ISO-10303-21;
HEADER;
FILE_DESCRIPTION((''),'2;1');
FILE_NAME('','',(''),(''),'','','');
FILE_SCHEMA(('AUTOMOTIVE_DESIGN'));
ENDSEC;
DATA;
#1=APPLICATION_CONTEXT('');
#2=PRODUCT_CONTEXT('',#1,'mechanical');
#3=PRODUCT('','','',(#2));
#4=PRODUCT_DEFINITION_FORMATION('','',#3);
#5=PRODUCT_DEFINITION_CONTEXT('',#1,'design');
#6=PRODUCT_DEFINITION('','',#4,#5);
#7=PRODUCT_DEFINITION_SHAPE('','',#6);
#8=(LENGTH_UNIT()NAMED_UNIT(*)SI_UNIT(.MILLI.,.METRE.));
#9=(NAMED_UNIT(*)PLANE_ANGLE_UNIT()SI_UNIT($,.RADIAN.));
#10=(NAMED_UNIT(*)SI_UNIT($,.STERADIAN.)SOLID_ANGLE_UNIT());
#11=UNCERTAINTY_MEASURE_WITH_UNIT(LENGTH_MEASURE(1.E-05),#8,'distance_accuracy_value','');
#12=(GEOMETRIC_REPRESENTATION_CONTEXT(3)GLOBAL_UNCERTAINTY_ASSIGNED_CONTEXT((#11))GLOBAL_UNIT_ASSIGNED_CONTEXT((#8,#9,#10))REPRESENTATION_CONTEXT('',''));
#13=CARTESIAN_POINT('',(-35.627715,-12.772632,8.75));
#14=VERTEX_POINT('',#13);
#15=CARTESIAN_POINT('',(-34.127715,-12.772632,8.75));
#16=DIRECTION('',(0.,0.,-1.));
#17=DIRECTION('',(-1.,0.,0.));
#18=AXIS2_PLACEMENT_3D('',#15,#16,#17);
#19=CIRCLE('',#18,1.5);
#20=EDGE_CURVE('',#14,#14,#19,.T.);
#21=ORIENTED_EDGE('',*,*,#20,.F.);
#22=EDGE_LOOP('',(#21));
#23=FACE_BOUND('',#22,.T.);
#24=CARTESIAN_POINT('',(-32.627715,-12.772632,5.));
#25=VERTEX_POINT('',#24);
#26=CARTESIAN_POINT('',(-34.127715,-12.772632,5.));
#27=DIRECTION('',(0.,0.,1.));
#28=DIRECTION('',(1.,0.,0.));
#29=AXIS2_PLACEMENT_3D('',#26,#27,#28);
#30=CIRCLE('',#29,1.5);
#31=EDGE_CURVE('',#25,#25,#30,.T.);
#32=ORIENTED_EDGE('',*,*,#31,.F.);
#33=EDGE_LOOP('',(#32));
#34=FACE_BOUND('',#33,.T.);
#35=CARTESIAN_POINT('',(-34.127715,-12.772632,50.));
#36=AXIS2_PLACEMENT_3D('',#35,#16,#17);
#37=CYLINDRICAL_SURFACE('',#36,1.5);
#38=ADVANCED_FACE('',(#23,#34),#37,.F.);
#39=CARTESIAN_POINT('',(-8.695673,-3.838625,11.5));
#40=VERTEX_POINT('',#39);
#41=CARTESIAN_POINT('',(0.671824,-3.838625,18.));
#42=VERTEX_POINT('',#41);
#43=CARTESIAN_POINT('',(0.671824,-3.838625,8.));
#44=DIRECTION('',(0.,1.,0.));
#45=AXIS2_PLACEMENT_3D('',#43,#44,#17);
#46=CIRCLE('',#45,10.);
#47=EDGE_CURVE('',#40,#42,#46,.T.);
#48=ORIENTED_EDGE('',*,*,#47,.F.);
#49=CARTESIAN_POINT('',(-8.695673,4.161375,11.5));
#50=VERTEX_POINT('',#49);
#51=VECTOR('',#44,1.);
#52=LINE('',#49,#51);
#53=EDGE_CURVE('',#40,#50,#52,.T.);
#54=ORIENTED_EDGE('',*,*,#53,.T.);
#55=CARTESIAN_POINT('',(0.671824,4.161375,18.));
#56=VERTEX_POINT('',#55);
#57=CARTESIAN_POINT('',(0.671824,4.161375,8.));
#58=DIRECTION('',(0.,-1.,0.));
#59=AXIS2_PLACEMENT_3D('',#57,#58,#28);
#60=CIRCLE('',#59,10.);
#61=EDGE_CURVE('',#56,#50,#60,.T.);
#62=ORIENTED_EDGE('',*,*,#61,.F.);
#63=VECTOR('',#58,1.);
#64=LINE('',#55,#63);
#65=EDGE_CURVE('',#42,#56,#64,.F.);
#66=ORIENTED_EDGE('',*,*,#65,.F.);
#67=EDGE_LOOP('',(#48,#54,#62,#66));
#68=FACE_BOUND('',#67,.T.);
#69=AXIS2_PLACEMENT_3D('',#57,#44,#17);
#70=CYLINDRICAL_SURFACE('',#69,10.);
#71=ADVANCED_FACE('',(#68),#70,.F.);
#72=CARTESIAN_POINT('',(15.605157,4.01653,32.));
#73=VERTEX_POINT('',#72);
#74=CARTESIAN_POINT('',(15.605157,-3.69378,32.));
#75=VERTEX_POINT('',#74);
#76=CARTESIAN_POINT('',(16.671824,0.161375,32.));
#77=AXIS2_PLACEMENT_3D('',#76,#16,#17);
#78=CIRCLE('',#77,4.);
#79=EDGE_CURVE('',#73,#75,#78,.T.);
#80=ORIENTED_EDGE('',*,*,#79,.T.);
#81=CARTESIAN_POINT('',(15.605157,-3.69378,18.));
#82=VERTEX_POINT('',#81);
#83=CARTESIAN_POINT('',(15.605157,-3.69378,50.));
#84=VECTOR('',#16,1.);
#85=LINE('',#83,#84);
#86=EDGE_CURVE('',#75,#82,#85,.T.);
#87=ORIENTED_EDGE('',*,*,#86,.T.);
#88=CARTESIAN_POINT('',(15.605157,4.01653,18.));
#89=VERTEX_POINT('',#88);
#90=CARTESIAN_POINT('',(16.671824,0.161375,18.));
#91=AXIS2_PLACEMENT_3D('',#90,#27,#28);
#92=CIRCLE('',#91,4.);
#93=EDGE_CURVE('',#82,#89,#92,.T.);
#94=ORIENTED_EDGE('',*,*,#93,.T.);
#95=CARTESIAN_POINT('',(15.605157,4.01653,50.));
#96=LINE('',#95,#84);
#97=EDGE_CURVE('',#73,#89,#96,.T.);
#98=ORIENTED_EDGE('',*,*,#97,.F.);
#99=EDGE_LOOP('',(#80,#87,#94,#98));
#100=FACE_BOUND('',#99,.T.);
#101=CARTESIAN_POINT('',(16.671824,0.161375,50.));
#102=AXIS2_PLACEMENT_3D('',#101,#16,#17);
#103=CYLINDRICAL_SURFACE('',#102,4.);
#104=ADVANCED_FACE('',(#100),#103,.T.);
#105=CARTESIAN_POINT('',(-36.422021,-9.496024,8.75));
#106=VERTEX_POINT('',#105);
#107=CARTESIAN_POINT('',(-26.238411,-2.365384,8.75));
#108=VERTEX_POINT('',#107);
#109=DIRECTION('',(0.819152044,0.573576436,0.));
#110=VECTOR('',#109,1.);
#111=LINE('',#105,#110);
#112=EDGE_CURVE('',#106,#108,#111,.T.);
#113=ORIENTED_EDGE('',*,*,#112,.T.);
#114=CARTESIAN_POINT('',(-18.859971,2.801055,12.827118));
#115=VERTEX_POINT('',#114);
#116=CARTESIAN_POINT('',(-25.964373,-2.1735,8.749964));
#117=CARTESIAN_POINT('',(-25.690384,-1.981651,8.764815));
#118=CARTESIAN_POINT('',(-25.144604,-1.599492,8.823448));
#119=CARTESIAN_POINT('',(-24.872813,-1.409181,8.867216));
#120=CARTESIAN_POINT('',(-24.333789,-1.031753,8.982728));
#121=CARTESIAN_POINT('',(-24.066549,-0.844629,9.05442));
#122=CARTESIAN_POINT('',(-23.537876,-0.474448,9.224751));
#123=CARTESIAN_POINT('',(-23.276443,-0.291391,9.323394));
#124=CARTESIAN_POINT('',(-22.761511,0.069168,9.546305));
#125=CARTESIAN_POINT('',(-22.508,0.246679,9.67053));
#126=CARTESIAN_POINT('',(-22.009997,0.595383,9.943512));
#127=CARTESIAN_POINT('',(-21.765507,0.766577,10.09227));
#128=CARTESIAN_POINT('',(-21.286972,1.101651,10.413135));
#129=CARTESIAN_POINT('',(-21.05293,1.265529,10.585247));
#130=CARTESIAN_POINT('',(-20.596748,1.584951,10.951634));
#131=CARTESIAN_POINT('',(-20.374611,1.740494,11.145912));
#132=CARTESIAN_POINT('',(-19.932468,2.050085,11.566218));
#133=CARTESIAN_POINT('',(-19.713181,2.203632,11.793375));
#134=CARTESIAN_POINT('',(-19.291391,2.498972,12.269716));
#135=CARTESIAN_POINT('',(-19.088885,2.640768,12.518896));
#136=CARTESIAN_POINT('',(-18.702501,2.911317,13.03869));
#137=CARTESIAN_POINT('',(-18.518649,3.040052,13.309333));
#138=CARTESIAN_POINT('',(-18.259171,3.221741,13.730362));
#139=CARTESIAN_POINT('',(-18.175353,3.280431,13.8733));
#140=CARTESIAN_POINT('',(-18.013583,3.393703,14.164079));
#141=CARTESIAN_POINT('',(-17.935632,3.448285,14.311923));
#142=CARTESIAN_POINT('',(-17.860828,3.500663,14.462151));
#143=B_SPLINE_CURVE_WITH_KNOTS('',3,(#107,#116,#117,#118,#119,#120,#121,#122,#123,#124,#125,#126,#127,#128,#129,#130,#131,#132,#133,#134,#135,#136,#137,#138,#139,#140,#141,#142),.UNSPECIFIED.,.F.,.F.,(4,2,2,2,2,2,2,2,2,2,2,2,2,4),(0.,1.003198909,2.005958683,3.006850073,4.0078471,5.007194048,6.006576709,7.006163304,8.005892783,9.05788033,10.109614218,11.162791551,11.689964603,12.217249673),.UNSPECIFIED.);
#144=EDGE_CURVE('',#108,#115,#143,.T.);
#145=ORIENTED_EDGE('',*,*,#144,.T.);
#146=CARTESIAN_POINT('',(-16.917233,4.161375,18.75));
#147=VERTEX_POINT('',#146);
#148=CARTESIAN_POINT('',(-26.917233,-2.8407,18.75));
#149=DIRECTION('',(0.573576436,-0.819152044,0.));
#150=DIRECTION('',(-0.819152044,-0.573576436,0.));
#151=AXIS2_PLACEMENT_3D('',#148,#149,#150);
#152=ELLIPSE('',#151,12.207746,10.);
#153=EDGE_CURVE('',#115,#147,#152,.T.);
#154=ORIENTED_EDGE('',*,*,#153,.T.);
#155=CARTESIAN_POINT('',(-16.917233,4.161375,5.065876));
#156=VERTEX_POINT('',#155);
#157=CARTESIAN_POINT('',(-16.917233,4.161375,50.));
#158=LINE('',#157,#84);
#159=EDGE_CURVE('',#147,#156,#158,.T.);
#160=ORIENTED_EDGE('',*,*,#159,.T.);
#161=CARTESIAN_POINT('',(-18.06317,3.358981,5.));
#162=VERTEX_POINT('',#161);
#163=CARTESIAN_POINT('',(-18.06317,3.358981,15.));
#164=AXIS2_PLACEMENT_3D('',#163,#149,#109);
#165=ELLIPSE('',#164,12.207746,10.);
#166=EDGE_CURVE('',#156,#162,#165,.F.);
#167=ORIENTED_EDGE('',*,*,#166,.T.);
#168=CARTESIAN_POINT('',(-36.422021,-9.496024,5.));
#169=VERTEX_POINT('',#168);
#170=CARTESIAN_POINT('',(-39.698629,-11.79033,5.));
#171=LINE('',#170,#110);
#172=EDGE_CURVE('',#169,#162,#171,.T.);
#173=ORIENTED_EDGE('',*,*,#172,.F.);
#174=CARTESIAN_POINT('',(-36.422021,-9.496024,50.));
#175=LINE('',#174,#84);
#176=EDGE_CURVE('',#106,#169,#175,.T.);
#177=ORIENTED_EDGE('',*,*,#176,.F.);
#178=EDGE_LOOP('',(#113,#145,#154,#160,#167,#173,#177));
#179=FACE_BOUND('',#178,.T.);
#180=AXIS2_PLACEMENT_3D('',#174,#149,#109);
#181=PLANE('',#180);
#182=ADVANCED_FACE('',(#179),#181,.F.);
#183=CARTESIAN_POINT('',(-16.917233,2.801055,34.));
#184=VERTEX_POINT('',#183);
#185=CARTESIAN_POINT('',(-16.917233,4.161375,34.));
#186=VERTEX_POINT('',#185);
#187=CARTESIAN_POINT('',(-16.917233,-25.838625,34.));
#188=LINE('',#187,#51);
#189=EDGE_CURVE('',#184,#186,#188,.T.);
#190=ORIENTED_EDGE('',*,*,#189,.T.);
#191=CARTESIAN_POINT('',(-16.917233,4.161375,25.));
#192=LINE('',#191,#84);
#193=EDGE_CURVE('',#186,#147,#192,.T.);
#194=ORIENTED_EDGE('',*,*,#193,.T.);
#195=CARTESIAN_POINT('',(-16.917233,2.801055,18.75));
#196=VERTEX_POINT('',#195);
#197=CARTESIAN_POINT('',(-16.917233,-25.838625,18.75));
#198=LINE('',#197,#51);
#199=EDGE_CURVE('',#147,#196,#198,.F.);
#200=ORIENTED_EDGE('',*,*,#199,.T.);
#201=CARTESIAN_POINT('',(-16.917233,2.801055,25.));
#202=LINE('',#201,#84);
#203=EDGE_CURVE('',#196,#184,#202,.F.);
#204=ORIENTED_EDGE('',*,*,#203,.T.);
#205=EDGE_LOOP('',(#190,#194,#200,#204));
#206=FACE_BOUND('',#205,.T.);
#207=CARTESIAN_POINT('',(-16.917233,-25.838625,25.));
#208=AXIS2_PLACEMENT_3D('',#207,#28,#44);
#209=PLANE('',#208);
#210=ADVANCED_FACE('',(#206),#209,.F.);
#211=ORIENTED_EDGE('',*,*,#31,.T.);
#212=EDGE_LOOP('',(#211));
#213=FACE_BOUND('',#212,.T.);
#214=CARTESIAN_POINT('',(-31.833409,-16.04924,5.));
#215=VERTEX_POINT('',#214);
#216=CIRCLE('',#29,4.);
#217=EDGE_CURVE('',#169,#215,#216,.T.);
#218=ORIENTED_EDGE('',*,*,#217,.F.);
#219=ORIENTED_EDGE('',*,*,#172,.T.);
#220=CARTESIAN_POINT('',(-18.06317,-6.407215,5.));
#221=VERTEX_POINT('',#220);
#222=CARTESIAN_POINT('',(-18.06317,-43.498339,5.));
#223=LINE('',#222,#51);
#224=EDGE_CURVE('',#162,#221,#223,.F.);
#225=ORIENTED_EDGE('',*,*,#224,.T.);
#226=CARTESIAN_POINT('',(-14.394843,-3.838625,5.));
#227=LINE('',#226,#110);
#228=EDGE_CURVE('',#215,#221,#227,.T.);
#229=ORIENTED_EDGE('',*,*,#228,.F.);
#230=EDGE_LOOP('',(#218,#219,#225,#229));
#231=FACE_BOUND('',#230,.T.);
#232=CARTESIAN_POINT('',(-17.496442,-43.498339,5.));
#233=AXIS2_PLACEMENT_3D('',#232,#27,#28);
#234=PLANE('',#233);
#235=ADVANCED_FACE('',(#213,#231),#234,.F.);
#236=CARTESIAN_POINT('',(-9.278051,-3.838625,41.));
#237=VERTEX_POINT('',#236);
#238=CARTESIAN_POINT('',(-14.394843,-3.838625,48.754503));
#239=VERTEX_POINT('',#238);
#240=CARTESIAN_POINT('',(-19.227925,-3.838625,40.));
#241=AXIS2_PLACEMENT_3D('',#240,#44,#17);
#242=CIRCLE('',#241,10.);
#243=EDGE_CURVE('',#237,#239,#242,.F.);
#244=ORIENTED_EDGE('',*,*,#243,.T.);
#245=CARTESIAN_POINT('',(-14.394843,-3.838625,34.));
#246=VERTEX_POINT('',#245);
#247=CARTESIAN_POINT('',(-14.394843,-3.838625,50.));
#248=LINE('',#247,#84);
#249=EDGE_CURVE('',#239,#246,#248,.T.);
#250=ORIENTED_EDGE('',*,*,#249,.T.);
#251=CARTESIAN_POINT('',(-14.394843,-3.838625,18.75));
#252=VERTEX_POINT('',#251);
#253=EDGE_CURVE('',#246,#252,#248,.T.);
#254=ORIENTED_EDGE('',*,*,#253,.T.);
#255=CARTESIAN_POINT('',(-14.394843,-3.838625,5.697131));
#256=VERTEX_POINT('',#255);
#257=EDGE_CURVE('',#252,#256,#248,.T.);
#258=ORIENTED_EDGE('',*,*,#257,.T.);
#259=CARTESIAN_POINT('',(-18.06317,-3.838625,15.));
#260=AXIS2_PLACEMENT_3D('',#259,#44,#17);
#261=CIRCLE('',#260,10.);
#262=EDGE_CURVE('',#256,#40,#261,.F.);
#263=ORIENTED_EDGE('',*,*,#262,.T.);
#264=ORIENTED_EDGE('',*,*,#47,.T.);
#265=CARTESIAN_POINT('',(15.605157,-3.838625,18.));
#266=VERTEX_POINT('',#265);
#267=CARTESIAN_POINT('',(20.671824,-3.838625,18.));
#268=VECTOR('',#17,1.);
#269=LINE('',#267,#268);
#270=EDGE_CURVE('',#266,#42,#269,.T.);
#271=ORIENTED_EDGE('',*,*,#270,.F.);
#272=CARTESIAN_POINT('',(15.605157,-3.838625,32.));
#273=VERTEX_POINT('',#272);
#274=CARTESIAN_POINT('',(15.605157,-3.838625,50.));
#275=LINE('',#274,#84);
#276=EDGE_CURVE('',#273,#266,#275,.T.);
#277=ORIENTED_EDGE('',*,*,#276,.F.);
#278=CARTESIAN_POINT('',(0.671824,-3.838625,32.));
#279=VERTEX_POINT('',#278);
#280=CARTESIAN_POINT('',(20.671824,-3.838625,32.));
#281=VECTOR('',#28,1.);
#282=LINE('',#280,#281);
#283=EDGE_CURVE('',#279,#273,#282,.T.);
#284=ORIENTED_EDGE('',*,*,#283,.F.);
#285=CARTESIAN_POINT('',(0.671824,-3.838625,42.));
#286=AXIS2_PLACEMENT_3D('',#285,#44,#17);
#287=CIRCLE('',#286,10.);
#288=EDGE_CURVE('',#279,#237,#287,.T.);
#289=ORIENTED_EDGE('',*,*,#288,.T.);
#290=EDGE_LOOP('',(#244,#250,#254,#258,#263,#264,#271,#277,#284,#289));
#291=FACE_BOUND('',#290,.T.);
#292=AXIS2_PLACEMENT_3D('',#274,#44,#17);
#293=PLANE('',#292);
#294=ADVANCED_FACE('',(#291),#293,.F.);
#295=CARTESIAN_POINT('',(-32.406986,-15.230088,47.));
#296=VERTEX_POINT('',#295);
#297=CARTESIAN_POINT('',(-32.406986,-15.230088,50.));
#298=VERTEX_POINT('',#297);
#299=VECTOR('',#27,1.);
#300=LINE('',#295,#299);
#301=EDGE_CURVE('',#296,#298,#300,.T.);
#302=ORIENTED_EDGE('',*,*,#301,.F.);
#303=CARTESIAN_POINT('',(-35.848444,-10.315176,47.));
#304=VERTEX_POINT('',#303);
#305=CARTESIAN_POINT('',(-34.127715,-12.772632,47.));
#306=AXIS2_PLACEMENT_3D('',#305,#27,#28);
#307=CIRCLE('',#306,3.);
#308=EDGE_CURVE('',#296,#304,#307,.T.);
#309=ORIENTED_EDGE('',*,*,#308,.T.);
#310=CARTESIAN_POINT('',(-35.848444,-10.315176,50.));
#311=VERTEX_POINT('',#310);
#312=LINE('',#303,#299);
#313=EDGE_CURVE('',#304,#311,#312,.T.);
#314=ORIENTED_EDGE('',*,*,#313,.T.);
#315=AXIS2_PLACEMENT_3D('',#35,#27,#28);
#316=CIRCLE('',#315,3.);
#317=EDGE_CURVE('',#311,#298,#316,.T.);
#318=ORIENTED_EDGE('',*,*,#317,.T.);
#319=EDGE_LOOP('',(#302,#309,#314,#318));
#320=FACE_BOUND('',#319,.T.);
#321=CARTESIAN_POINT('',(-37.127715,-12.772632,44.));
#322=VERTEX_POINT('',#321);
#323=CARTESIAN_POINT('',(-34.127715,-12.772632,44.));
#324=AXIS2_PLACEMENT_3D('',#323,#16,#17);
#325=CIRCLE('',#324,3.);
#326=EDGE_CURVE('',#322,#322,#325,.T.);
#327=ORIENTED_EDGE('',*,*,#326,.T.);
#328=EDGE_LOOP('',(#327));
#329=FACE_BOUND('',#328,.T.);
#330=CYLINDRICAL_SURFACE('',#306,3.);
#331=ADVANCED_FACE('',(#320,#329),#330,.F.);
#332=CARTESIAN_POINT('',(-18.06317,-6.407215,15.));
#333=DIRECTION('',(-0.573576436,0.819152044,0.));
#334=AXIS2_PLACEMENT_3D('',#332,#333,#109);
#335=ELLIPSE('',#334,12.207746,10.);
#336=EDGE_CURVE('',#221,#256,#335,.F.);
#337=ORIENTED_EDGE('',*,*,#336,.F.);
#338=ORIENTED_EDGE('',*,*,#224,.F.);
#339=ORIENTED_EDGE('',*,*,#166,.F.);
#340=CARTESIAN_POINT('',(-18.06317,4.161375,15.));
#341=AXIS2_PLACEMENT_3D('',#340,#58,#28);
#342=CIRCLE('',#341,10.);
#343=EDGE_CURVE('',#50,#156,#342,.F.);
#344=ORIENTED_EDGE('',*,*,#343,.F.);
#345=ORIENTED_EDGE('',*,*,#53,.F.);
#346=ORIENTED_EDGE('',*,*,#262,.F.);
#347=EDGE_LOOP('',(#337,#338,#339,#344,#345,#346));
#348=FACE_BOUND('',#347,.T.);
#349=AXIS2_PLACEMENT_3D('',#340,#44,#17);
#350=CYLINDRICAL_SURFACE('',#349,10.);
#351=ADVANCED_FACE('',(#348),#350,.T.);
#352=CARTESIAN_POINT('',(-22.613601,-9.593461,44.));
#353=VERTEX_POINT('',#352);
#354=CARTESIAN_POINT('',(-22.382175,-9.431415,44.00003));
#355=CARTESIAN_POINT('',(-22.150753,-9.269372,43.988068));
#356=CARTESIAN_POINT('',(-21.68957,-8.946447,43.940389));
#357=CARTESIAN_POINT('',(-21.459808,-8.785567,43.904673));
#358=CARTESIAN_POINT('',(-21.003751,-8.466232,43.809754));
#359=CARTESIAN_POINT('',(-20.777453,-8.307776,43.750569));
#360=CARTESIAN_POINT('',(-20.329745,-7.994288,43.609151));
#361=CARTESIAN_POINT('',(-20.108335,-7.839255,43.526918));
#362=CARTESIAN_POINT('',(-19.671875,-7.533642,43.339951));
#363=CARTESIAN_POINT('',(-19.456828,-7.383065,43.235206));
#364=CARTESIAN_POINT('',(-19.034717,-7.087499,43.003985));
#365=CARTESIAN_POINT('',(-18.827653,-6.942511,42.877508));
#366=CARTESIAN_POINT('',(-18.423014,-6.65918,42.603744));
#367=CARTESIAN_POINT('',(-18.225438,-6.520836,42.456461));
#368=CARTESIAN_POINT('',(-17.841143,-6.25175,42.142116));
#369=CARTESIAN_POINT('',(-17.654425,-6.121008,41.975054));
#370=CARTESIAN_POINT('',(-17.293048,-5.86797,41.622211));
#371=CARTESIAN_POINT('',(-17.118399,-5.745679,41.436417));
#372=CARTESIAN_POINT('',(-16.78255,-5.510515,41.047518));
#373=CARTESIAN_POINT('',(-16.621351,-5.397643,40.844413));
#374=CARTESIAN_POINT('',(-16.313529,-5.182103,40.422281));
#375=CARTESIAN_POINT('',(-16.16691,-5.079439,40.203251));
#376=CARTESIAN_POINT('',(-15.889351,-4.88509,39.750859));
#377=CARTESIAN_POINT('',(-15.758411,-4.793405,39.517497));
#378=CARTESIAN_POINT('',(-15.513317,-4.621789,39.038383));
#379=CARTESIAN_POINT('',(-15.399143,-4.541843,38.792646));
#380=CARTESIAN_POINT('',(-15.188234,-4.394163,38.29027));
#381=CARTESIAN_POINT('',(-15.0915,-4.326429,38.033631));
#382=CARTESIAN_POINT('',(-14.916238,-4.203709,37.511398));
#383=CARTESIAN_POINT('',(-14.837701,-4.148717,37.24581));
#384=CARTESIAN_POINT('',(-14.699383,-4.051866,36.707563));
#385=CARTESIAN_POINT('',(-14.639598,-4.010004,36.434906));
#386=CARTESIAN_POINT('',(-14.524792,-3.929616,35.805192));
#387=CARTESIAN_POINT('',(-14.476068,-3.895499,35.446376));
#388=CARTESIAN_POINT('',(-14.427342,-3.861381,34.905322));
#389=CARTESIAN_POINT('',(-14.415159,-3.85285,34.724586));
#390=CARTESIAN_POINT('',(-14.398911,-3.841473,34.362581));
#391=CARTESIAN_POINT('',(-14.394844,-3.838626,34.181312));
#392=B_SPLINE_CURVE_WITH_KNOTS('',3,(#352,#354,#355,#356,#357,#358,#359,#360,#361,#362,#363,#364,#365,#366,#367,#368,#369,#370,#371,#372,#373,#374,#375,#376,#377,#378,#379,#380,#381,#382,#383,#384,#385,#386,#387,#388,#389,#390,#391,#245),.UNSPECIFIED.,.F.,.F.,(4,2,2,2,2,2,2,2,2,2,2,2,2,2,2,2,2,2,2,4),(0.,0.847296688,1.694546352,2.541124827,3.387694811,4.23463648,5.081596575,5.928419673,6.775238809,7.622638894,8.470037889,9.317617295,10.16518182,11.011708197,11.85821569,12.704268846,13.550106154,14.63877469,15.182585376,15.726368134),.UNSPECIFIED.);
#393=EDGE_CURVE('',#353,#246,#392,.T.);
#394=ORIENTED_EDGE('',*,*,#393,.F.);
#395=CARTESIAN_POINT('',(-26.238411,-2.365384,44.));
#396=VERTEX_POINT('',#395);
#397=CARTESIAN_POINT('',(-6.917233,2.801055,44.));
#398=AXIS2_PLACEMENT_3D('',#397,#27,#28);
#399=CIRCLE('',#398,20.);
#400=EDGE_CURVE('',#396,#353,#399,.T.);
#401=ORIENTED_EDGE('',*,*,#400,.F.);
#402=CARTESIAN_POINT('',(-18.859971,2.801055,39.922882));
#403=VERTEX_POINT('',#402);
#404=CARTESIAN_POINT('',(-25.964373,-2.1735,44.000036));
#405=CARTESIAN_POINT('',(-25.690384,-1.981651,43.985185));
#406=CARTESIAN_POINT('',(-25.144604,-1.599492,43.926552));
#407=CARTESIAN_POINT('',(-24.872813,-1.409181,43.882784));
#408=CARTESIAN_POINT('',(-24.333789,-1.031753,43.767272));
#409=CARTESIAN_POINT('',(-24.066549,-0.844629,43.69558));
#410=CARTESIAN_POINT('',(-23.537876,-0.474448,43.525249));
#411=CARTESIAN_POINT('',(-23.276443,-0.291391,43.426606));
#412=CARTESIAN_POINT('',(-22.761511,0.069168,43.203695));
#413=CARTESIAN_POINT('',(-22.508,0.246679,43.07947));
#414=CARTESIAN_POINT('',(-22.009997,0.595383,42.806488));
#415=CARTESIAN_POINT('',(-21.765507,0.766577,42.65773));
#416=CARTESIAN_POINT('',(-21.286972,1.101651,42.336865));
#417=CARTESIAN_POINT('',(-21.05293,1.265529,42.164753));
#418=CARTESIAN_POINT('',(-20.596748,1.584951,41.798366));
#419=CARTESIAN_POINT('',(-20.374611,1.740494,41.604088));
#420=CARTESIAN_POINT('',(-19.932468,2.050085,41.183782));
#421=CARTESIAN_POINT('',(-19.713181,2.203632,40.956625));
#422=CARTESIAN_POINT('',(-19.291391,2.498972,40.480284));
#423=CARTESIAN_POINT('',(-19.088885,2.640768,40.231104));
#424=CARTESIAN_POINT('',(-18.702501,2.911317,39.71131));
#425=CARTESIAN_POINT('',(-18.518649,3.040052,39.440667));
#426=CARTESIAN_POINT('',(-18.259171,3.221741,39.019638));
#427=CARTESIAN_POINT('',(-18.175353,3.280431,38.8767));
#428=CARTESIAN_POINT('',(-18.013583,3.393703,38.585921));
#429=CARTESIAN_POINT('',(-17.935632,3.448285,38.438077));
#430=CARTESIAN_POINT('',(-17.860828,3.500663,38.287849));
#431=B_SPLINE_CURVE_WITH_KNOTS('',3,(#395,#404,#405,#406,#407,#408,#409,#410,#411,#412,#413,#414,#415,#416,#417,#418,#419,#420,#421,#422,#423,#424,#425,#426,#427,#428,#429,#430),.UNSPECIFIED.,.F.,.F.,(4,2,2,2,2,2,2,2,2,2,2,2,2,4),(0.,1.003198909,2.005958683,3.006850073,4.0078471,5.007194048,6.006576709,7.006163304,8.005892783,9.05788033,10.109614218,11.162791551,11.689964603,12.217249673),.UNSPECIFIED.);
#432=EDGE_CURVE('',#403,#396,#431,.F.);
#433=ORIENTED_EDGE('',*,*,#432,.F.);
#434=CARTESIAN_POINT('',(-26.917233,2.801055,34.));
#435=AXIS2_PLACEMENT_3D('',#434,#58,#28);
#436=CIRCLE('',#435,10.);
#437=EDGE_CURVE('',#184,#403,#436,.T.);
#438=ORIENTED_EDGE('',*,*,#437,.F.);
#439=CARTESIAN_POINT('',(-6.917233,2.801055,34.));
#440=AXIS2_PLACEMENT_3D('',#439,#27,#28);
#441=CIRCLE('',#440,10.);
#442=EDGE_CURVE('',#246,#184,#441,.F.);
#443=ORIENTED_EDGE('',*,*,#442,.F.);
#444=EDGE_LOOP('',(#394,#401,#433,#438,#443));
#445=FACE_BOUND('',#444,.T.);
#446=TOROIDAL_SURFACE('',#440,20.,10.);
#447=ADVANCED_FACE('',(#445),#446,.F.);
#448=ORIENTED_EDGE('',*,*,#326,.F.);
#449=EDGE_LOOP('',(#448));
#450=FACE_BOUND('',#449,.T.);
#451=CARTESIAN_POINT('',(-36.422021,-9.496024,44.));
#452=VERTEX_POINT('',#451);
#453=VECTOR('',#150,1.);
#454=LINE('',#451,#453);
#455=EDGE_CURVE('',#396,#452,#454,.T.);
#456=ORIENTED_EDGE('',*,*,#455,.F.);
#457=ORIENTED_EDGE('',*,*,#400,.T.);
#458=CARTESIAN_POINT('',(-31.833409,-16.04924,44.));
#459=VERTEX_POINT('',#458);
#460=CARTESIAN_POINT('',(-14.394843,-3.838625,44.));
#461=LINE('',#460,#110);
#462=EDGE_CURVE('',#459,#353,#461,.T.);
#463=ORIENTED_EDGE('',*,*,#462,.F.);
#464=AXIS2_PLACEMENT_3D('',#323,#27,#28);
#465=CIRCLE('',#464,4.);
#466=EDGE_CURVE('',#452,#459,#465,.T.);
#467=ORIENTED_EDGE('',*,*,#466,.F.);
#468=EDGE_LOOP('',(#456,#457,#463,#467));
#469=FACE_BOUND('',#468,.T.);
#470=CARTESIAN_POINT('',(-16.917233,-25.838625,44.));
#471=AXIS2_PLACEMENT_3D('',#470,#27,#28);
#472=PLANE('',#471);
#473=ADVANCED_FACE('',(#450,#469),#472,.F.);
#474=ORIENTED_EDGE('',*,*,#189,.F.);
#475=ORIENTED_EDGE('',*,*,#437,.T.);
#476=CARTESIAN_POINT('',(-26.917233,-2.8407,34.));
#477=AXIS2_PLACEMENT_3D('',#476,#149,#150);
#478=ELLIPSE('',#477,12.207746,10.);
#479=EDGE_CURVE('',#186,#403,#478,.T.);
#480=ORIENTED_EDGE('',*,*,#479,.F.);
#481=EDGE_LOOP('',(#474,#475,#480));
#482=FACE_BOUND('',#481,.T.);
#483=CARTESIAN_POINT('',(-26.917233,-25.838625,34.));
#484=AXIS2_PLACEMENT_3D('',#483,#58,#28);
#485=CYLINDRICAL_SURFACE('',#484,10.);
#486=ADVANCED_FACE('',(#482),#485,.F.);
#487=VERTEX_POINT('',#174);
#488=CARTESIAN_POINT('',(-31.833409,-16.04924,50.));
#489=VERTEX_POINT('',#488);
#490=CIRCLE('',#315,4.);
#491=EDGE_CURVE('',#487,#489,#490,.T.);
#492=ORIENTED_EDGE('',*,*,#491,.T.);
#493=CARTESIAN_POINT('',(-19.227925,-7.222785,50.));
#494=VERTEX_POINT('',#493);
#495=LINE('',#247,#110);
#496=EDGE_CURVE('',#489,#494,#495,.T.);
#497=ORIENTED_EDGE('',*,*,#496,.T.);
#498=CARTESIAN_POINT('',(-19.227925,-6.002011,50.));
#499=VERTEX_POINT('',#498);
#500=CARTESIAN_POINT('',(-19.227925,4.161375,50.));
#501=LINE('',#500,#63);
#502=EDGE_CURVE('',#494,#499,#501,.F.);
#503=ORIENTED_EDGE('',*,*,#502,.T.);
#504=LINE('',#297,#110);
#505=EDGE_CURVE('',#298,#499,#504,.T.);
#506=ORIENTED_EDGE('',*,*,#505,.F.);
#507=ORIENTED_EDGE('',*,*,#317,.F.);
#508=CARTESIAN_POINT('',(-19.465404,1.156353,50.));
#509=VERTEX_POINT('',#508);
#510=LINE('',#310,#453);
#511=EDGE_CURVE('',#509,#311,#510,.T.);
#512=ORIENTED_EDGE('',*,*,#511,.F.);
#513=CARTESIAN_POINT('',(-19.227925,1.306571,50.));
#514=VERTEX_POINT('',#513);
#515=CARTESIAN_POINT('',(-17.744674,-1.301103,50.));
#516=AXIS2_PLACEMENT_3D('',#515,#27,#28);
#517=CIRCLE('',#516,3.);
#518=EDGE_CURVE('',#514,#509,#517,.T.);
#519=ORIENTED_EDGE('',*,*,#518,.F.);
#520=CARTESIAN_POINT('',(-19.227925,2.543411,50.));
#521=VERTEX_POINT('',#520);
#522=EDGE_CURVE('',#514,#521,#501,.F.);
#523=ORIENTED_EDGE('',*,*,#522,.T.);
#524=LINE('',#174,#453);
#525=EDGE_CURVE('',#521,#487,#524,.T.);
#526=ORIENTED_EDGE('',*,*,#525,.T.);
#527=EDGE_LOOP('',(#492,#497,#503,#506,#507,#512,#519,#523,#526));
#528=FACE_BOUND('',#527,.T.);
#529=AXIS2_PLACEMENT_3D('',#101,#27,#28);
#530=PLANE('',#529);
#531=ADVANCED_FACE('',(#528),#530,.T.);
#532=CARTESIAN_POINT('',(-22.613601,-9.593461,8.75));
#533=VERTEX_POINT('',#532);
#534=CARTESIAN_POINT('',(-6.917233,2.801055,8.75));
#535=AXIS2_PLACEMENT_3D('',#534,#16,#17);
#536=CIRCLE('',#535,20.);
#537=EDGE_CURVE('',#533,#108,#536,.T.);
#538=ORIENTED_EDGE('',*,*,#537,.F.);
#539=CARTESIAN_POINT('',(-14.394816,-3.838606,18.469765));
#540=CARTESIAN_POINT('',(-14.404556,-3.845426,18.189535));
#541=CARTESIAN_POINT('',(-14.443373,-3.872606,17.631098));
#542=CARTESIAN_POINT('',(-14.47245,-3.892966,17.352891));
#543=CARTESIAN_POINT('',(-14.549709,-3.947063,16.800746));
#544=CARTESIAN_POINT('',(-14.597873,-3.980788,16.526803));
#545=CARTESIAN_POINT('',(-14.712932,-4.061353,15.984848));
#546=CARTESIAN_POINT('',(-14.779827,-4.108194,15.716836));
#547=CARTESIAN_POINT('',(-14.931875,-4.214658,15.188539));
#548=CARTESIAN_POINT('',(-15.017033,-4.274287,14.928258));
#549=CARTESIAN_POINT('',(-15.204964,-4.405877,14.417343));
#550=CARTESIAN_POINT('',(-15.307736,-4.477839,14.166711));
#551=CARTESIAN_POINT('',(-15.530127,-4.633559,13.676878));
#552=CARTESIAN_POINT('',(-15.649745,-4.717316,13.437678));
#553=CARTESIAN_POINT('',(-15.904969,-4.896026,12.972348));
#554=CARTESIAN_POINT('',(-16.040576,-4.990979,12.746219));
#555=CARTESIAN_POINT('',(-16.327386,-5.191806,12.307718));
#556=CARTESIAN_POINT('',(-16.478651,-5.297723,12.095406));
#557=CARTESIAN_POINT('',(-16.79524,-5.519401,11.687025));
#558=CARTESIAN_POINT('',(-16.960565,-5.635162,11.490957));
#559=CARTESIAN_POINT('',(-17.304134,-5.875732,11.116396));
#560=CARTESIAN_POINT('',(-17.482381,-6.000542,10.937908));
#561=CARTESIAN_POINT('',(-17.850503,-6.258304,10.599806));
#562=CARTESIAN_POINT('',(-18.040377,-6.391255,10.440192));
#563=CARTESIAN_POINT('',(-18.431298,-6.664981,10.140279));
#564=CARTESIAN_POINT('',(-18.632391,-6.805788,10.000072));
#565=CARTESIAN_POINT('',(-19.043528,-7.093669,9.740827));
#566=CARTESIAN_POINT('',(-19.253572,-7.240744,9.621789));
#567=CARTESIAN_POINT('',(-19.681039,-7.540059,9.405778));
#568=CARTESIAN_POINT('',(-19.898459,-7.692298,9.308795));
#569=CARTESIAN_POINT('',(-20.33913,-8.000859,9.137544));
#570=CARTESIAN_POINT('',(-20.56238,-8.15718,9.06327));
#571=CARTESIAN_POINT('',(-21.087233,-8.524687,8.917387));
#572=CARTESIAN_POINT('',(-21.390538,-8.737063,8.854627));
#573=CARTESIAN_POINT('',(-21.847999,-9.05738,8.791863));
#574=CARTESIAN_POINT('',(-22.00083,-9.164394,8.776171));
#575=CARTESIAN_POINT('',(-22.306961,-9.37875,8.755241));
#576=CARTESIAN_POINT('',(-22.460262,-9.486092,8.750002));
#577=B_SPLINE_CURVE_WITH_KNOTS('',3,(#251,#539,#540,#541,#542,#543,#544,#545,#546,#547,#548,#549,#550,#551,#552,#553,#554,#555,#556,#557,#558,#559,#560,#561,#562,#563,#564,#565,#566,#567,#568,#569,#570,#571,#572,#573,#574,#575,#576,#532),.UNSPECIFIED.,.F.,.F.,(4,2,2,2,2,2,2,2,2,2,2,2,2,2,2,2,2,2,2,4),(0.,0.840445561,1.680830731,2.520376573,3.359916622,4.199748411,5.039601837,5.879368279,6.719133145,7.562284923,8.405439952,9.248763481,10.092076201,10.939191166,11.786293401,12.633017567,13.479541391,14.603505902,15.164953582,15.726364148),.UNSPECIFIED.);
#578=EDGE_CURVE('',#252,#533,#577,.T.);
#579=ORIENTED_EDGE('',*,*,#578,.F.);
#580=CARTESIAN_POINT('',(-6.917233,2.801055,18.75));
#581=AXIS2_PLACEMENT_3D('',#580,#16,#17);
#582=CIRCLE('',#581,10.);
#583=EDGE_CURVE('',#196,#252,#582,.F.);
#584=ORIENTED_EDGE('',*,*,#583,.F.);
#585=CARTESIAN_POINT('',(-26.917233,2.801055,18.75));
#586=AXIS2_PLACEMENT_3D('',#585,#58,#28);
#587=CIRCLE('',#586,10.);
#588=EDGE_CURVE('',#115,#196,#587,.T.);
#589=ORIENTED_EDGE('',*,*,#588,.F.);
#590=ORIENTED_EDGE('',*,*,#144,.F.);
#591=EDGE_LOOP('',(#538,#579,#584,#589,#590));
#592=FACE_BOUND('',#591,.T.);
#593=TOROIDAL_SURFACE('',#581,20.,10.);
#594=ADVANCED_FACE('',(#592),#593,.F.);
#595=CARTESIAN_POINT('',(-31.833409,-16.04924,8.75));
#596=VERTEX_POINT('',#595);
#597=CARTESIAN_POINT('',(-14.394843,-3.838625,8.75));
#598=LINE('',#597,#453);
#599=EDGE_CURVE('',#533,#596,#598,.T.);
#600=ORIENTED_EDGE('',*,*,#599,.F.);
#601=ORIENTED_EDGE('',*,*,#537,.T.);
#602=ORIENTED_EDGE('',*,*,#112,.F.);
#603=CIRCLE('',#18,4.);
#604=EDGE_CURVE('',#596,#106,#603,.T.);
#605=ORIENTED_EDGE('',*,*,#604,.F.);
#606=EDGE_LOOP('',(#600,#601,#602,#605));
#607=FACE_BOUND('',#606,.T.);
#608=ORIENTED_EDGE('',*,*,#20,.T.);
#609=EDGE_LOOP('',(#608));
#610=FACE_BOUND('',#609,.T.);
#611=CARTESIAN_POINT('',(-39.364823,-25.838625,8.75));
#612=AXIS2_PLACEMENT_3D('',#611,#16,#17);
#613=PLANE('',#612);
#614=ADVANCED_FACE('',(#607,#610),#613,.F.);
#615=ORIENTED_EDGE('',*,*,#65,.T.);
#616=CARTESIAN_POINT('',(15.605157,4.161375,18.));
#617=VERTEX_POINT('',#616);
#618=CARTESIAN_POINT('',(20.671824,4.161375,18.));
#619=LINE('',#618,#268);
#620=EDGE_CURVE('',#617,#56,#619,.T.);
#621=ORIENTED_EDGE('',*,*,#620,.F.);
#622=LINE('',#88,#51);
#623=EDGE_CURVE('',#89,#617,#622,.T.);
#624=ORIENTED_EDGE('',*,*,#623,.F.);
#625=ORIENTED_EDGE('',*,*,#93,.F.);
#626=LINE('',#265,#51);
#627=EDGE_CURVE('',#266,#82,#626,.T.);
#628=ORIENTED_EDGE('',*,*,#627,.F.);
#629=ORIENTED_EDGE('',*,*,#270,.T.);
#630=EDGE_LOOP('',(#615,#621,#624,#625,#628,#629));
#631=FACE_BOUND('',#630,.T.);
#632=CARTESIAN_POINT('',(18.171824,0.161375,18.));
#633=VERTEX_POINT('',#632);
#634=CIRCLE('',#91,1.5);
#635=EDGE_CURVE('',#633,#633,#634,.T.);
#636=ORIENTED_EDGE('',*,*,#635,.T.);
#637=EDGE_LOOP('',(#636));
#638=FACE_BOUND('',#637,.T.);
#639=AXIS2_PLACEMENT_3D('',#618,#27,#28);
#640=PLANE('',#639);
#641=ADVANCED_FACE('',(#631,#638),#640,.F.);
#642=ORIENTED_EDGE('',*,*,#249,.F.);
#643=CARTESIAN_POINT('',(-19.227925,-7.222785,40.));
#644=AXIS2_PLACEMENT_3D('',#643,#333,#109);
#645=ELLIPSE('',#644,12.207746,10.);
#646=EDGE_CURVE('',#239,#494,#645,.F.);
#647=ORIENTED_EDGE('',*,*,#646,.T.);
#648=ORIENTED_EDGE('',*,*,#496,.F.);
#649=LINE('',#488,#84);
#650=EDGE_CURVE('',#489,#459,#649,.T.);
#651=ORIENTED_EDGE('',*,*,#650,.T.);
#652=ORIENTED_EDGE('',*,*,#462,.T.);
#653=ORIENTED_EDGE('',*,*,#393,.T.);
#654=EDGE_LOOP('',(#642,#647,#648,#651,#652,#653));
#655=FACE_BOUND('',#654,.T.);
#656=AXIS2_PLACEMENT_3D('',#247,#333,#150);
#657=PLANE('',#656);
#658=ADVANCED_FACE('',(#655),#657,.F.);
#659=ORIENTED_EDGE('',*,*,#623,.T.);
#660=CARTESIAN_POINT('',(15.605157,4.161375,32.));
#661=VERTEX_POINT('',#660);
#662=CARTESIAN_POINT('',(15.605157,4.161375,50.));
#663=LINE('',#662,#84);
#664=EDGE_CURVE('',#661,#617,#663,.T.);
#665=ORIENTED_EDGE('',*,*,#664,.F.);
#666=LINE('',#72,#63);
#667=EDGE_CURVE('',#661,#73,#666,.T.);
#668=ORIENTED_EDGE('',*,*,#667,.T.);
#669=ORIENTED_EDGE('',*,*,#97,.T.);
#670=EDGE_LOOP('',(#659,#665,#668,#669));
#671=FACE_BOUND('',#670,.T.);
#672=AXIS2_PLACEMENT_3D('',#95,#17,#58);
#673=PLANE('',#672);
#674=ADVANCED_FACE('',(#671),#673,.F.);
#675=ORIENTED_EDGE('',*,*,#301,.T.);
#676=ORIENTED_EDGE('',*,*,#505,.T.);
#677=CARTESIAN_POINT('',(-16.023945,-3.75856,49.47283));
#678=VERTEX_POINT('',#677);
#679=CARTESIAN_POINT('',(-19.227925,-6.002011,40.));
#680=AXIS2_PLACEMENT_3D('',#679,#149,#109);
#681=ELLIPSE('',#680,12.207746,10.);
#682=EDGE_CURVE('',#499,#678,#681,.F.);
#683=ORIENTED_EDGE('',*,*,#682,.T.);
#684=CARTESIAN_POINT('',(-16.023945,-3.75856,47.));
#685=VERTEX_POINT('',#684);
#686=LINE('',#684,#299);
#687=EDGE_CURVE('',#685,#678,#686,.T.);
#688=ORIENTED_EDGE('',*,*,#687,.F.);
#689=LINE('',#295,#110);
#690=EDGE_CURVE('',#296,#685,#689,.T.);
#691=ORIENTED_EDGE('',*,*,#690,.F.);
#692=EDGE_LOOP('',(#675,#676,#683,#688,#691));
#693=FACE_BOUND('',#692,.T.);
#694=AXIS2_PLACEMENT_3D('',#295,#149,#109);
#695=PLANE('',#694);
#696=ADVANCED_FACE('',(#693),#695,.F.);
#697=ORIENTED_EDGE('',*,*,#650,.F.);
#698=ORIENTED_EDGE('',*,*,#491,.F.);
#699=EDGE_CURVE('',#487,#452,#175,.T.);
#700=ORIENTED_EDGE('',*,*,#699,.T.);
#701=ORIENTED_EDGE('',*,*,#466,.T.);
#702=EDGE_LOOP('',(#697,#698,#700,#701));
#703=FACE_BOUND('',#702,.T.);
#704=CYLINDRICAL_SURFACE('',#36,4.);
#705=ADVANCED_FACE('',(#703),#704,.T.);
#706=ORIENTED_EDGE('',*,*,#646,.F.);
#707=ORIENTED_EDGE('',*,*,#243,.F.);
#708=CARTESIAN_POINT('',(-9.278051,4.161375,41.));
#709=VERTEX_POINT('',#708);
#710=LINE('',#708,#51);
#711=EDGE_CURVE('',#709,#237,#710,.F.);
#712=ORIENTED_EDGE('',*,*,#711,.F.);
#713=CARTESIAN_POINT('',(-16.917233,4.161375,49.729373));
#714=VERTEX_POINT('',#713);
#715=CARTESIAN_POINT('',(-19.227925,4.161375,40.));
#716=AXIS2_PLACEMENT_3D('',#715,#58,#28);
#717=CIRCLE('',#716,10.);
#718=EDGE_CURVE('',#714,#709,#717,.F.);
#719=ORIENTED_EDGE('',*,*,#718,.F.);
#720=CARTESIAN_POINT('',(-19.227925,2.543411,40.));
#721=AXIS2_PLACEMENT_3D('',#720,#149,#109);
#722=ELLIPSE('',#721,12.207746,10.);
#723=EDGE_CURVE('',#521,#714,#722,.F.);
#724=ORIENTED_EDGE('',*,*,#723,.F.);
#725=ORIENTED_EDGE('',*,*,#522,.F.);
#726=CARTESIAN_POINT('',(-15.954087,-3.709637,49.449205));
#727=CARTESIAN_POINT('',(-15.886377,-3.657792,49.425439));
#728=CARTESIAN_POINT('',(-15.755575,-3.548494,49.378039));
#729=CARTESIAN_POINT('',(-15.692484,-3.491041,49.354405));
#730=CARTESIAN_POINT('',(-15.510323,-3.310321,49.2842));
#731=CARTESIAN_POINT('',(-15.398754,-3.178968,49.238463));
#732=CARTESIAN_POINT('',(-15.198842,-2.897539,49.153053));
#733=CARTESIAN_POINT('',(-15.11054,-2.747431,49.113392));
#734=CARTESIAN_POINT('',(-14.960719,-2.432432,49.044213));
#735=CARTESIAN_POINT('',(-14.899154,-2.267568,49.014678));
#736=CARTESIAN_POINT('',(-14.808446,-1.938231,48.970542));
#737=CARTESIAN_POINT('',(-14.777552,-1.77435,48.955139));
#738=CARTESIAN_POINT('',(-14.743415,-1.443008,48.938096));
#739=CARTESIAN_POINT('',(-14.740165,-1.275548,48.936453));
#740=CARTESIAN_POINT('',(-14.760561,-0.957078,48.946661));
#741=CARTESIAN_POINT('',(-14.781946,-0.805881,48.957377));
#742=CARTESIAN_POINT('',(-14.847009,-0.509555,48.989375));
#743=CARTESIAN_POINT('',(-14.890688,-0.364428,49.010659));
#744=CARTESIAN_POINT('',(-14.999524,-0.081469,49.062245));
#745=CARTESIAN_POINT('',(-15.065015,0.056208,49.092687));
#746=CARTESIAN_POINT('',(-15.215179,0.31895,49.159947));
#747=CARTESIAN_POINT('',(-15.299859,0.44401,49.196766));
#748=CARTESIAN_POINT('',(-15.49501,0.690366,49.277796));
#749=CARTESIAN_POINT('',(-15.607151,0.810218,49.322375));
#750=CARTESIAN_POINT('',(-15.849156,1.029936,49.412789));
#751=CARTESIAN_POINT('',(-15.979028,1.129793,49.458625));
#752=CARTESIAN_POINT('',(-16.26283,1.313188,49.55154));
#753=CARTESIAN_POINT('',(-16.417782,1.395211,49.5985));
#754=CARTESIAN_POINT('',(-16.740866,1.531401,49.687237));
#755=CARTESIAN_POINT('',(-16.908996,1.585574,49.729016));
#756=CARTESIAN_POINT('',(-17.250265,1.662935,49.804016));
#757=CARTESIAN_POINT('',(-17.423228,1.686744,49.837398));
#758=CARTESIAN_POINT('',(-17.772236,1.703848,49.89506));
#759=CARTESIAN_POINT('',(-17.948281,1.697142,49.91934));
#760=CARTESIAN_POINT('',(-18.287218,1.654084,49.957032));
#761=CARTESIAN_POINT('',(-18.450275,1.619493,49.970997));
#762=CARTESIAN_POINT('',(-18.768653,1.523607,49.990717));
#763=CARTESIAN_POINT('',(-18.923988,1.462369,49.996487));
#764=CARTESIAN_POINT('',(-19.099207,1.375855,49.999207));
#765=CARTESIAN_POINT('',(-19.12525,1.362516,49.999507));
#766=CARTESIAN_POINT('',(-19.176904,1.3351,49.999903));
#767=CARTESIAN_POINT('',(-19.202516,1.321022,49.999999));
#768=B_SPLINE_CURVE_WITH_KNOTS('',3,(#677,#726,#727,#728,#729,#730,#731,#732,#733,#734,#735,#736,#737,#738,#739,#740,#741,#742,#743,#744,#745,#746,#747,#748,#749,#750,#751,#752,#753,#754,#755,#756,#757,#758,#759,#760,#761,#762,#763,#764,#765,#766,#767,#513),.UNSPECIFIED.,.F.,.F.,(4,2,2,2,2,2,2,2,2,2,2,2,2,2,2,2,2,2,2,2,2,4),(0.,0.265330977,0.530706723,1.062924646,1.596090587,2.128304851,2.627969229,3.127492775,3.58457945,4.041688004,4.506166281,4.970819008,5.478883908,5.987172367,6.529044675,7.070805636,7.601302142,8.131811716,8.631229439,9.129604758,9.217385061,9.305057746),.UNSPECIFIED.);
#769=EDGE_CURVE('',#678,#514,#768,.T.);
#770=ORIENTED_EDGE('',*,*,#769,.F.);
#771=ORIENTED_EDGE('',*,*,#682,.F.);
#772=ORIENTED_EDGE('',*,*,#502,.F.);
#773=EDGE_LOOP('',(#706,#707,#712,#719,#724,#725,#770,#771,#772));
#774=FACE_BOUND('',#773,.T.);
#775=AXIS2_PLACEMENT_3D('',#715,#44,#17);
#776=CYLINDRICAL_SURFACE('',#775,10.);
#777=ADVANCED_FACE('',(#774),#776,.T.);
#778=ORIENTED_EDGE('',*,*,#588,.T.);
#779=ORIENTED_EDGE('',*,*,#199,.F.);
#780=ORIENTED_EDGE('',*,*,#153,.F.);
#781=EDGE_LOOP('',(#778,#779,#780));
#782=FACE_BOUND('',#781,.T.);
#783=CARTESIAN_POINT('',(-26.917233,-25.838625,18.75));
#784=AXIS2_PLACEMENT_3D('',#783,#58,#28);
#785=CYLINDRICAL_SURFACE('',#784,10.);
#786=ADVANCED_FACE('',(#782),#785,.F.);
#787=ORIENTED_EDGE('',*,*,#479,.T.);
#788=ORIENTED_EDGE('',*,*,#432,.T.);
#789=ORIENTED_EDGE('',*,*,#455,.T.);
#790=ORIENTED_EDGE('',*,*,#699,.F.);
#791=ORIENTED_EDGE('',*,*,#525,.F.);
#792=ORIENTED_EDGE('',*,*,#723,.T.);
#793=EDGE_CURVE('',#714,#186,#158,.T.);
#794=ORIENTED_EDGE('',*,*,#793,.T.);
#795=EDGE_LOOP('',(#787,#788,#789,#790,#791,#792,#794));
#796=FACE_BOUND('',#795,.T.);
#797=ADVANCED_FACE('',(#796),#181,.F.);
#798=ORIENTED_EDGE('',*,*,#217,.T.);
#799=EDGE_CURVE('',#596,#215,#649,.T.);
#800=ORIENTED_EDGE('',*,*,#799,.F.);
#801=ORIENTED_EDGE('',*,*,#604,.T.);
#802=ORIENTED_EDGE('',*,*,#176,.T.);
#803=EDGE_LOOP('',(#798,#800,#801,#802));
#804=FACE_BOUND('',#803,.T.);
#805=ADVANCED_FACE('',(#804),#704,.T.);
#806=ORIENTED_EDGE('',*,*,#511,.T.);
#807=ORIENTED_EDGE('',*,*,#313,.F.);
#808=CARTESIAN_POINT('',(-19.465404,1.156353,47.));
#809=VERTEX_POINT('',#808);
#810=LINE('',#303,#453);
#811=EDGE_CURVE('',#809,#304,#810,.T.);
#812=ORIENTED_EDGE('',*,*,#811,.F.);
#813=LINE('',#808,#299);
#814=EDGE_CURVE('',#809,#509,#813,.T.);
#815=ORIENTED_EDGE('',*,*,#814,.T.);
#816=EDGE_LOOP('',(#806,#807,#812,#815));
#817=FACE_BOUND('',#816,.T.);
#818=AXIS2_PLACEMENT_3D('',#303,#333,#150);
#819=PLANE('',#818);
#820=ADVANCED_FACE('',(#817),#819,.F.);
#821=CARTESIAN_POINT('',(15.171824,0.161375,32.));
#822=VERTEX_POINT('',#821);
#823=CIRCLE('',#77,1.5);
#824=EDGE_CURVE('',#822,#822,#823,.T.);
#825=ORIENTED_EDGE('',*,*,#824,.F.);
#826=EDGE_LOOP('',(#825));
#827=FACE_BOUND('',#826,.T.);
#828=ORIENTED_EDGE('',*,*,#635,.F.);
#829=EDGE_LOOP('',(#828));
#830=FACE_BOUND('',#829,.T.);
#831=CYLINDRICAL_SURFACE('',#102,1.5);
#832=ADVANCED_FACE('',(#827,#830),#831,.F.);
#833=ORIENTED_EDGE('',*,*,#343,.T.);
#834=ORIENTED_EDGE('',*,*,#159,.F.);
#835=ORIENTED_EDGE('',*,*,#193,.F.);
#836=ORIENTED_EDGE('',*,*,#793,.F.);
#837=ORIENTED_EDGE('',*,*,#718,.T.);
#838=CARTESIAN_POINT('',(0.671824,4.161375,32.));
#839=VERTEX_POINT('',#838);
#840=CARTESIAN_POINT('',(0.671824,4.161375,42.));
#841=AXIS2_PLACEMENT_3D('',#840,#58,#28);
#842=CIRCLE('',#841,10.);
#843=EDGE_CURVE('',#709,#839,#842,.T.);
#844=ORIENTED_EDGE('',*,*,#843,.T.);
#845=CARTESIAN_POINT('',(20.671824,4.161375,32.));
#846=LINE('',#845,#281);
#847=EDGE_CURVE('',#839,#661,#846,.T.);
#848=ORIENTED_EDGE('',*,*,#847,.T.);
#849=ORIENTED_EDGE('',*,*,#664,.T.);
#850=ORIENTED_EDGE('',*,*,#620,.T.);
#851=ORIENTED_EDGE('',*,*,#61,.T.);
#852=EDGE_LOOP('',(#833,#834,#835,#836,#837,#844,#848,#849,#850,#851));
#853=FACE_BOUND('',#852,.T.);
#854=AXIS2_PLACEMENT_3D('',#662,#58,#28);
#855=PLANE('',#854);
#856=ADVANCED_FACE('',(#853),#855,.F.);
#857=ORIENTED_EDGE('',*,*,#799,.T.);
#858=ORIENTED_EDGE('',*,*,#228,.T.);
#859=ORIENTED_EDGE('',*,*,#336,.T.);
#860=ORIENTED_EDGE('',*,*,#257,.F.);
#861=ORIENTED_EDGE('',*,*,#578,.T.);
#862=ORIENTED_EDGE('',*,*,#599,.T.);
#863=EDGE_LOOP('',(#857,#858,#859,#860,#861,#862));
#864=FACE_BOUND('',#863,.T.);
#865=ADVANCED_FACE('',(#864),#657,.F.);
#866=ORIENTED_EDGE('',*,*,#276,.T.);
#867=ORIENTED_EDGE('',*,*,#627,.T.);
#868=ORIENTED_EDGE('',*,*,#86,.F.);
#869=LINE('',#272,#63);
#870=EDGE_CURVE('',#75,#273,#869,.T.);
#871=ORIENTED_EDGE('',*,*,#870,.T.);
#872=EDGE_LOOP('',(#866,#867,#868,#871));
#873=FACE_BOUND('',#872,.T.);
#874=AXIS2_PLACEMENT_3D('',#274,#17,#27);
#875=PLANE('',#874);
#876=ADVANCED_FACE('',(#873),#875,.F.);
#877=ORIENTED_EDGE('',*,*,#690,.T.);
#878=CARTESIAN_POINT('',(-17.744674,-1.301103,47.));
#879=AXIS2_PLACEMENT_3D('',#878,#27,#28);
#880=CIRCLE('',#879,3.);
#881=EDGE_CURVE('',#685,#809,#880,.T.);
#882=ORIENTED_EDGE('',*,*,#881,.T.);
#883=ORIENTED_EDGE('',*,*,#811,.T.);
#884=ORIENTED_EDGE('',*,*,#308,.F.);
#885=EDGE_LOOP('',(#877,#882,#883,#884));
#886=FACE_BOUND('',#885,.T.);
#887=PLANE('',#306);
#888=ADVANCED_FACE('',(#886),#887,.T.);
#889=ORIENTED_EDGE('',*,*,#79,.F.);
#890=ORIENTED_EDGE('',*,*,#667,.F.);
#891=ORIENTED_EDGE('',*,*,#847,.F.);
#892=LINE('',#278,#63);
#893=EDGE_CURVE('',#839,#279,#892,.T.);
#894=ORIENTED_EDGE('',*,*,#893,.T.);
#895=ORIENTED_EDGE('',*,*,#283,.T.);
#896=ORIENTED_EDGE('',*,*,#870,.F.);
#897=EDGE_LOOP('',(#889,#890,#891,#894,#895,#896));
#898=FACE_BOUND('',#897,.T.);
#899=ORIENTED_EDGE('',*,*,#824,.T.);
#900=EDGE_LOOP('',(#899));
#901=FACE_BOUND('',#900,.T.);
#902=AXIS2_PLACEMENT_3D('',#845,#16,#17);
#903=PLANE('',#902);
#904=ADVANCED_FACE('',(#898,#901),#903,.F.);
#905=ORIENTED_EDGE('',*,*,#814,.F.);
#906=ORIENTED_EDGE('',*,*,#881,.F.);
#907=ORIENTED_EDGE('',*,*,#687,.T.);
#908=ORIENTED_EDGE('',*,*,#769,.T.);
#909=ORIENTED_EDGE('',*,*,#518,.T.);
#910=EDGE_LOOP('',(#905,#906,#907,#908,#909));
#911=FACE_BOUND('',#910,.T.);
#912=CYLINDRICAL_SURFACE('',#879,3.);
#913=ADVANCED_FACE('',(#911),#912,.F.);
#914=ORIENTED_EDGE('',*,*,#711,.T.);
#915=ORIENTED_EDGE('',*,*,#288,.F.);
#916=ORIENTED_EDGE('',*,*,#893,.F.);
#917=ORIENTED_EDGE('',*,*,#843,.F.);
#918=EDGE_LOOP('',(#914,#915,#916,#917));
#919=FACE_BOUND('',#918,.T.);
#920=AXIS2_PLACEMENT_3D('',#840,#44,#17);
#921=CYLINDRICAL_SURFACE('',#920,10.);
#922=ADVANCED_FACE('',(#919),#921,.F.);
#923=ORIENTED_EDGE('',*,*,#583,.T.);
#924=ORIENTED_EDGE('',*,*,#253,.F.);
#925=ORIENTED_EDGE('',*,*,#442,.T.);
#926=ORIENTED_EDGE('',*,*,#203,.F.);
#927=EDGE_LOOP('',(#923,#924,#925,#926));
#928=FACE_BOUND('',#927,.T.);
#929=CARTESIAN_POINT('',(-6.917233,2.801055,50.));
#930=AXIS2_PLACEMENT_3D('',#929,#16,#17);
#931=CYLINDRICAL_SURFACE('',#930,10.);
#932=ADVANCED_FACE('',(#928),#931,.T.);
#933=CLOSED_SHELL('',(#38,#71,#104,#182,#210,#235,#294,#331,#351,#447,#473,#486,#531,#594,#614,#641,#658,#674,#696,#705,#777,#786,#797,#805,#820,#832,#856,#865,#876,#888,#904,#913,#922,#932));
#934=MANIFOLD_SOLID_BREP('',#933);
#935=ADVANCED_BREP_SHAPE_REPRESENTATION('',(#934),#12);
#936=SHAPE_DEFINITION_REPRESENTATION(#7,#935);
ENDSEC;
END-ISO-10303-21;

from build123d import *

# Parameters (mm, degrees)
SKETCH_1_R           = 1.5
EXTRUDE_2_DEPTH      = 50
SKETCH_14_W          = 30
SKETCH_14_H          = 18
CUT_EXTRUDE_6_DEPTH  = 65.195102675
SKETCH_15_W          = 22.4475894
SKETCH_15_H          = 16.25
CUT_EXTRUDE_7_DEPTH  = 30
SKETCH_17_W          = 25.359818697
SKETCH_17_H          = 19
CUT_EXTRUDE_9_DEPTH  = 30
FILLET_8_R           = 10
SKETCH_19_W          = 34.027540403
SKETCH_19_H          = 5
CUT_EXTRUDE_11_DEPTH = 65.759348106
FILLET_9_R           = 10
FILLET_11_R          = 10
FILLET_12_R          = 10
CUT_EXTRUDE_12_DEPTH = 3
CUT_EXTRUDE_START    = -5
SKETCH_21_R          = 3
CUT_EXTRUDE_13_DEPTH = 5


with BuildPart() as part:
    # 草图1 → 凸台-拉伸2 (new body)
    with BuildSketch(Plane.XY):
        with BuildLine():
            Line((15.60515688, 4.016530447), (15.60515688, 4.161375168))
            Line((15.60515688, 4.161375168), (-16.917233431, 4.161375168))
            Line((-16.917233431, 4.161375168), (-36.422020871, -9.496024029))
            ThreePointArc((-36.422020871, -9.496024029), (-37.404323302, -15.066937951), (-31.83340938, -16.049240383))
            Line((-31.83340938, -16.049240383), (-14.39484312, -3.838624832))
            Line((-14.39484312, -3.838624832), (15.60515688, -3.838624832))
            Line((15.60515688, -3.838624832), (15.60515688, -3.693780111))
            ThreePointArc((15.60515688, -3.693780111), (20.671823547, 0.161375168), (15.60515688, 4.016530447))
        make_face()
        with Locations((-34.127715125, -12.772632206)):
            Circle(SKETCH_1_R, mode=Mode.SUBTRACT)
        with Locations((16.671823547, 0.161375168)):
            Circle(SKETCH_1_R, mode=Mode.SUBTRACT)
    extrude(amount=EXTRUDE_2_DEPTH)

    # 草图14 → 切除-拉伸6 (cut, through all)
    with BuildSketch(Plane.XZ.offset(3.838624832)):
        with Locations((5.671823547, 41)):
            Rectangle(SKETCH_14_W, SKETCH_14_H)
        with Locations((5.671823547, 9)):
            Rectangle(SKETCH_14_W, SKETCH_14_H)
    extrude(amount=-CUT_EXTRUDE_6_DEPTH, mode=Mode.SUBTRACT)

    # 草图15 → 切除-拉伸7 (cut)
    with BuildSketch(Plane(origin=(0, 4.161375168, 0), x_dir=(1, 0, 0), z_dir=(0, 1, 0))):
        with Locations((-28.141028131, -16.875)):
            Rectangle(SKETCH_15_W, SKETCH_15_H)
    extrude(amount=-CUT_EXTRUDE_7_DEPTH, mode=Mode.SUBTRACT)

    # 草图17 → 切除-拉伸9 (cut)
    with BuildSketch(Plane(origin=(0, 4.161375168, 0), x_dir=(1, 0, 0), z_dir=(0, 1, 0))):
        with Locations((-29.59714278, -34.5)):
            Rectangle(SKETCH_17_W, SKETCH_17_H)
    extrude(amount=-CUT_EXTRUDE_9_DEPTH, mode=Mode.SUBTRACT)

    # 圆角8
    # the kernel refuses this fillet: 10 mm, written as the material it takes off along each edge
    with BuildSketch(Plane(origin=(-16.917233431, -5.604821542, 8.75), x_dir=(0.8191520442889905, 0.573576436351048, 0), z_dir=(0, 0, 1))) as fillet_8_piece_1:
        with BuildLine():
            CenterArc((13.012933373, 1.149926903), FILLET_8_R, 145, 41.603203435)
            Line((4.82141293, 6.885691266), (0, 0))
            Line((0, 0), (3.079269995, 0))
        make_face()
    extrude(amount=35.25, mode=Mode.SUBTRACT)

    # 草图19 → 切除-拉伸11 (cut, through all)
    with BuildSketch(Plane(origin=(-7.520806183, 10.740824359, 0), x_dir=(0.8191520442889908, 0.5735764363510477, 0), z_dir=(-0.5735764363510477, 0.8191520442889908, 0))):
        with Locations((-22.268098274, -2.5)):
            Rectangle(SKETCH_19_W, SKETCH_19_H)
    extrude(amount=-CUT_EXTRUDE_11_DEPTH, mode=Mode.SUBTRACT)

    # 圆角9
    fillet_9_edges = [part.edges().sort_by_distance(p)[0] for p in [
        (-9.328176453, 0.161375168, 18),
        (-9.328176453, 0.161375168, 32),
    ]]
    fillet(fillet_9_edges, radius=FILLET_9_R)

    # 圆角11
    # the kernel refuses this fillet: 10 mm, written as the material it adds along each edge
    with BuildSketch(Plane(origin=(-16.917233431, 29.161375168, 44), x_dir=(0, 0, -1), z_dir=(0, -1, 0))) as fillet_11_piece_1_section:
        with BuildLine():
            CenterArc((FILLET_11_R, -FILLET_11_R), FILLET_11_R, 90, 90)
            Line((0, -FILLET_11_R), (0, 0))
            Line((0, 0), (FILLET_11_R, 0))
        make_face()
    fillet_11_piece_1 = extrude(amount=26.360319786, mode=Mode.PRIVATE)
    fillet_11_piece_1 = split(fillet_11_piece_1, bisect_by=Plane(origin=(-17.705446038, 3.609462759, 40.498761656), z_dir=(0.5735764363510475, -0.8191520442889908, 0)), keep=Keep.TOP, mode=Mode.PRIVATE)
    add(fillet_11_piece_1)
    with BuildSketch(Plane(origin=(-16.917233431, 29.161375168, 8.75), x_dir=(-1, 0, 0), z_dir=(0, -1, 0))) as fillet_11_piece_2_section:
        with BuildLine():
            CenterArc((FILLET_11_R, -FILLET_11_R), FILLET_11_R, 90, 90)
            Line((0, -FILLET_11_R), (0, 0))
            Line((0, 0), (FILLET_11_R, 0))
        make_face()
    fillet_11_piece_2 = extrude(amount=26.360319786, mode=Mode.PRIVATE)
    fillet_11_piece_2 = split(fillet_11_piece_2, bisect_by=Plane(origin=(-17.705446038, 3.609462759, 12.251238344), z_dir=(0.5735764363510475, -0.8191520442889908, 0)), keep=Keep.TOP, mode=Mode.PRIVATE)
    add(fillet_11_piece_2)
    with BuildSketch(Plane(origin=(-6.917233431, 2.801055382, 8.75), x_dir=(-1, 0, 0), z_dir=(0, 1, 0))) as fillet_11_piece_3_section:
        with BuildLine():
            CenterArc((10 + FILLET_11_R, FILLET_11_R), FILLET_11_R, 180, 90)
            Line((10 + FILLET_11_R, 0), (10, 0))
            Line((10, 0), (10, FILLET_11_R))
        make_face()
    fillet_11_piece_3 = revolve(axis=Axis((-6.917233431, 2.801055382, 8.75), (0, 0, 1)), revolution_arc=184.854944875, mode=Mode.PRIVATE)
    fillet_11_piece_3 = split(fillet_11_piece_3, bisect_by=Plane(origin=(-14.201650521, -3.703349918, 18.374598869), z_dir=(-0.5735764363510472, 0.819152044288991, 0)), keep=Keep.TOP, mode=Mode.PRIVATE)
    fillet_11_piece_3 = split(fillet_11_piece_3, bisect_by=Plane(origin=(-18.790262012, 2.849866436, 18.374598869), z_dir=(0.5735764363510475, -0.8191520442889908, 0)), keep=Keep.TOP, mode=Mode.PRIVATE)
    add(fillet_11_piece_3)
    with BuildSketch(Plane(origin=(-6.917233431, 2.801055382, 44), x_dir=(-1, 0, 0), z_dir=(0, 1, 0))) as fillet_11_piece_4_section:
        with BuildLine():
            CenterArc((10 + FILLET_11_R, -FILLET_11_R), FILLET_11_R, 90, 90)
            Line((10 + FILLET_11_R, 0), (10, 0))
            Line((10, 0), (10, -FILLET_11_R))
        make_face()
    fillet_11_piece_4 = revolve(axis=Axis((-6.917233431, 2.801055382, 44), (0, 0, 1)), revolution_arc=184.854944875, mode=Mode.PRIVATE)
    fillet_11_piece_4 = split(fillet_11_piece_4, bisect_by=Plane(origin=(-14.743190126, -4.082540032, 40.444195091), z_dir=(-0.5735764363510472, 0.819152044288991, 0)), keep=Keep.TOP, mode=Mode.PRIVATE)
    fillet_11_piece_4 = split(fillet_11_piece_4, bisect_by=Plane(origin=(-19.331801617, 2.470676322, 40.444195091), z_dir=(0.5735764363510475, -0.8191520442889908, 0)), keep=Keep.TOP, mode=Mode.PRIVATE)
    add(fillet_11_piece_4)

    # 圆角12
    # the kernel refuses this fillet: 10 mm, written as the material it takes off along each edge
    with BuildSketch(Plane(origin=(-9.328176453, -28.587996687, 50), x_dir=(-1, 0, 0), z_dir=(0, 1, 0))) as fillet_12_piece_1:
        with BuildLine():
            CenterArc((9.899748742, -10), FILLET_12_R, 90, 84.260829523)
            Line((-0.050125629, -9), (-1.045113066, -8.9))
            ThreePointArc((-1.045113066, -8.9), (-1, -8), (-1, 0))
            Line((-1, 0), (0, 1))
            Line((0, 1), (9.899748742, 1))
            Line((9.899748742, 1), (9.899748742, 0))
        make_face()
    extrude(amount=57.498743711, mode=Mode.SUBTRACT)
    with BuildSketch(Plane(origin=(-9.328176453, -25.67610982, 5), x_dir=(-1, 0, 0), z_dir=(0, 1, 0))) as fillet_12_piece_2:
        with BuildLine():
            CenterArc((8.734993995, 10), FILLET_12_R, 200.487315115, 69.512684885)
            Line((-0.632503002, 6.5), (-1.569252702, 6.15))
            ThreePointArc((-1.569252702, 6.15), (-1, 3), (-1, 0))
            Line((-1, 0), (0, -1))
            Line((0, -1), (8.734993995, -1))
            Line((8.734993995, -1), (8.734993995, 0))
        make_face()
    extrude(amount=51.674969976, mode=Mode.SUBTRACT)

    # 草图20 → 切除-拉伸12 (cut)
    with BuildSketch(Plane.XY.offset(50)):
        with BuildLine():
            Line((-35.848444434, -10.315176073), (-19.465403549, 1.156352654))
            ThreePointArc((-19.465403549, 1.156352654), (-15.287218107, 0.41962583), (-16.02394493, -3.758559612))
            Line((-16.02394493, -3.758559612), (-32.406985816, -15.230088339))
            ThreePointArc((-32.406985816, -15.230088339), (-36.585171258, -14.493361515), (-35.848444434, -10.315176073))
        make_face()
    extrude(amount=-CUT_EXTRUDE_12_DEPTH, mode=Mode.SUBTRACT)

    # 草图21 → 切除-拉伸13 (cut)
    with BuildSketch(Plane(origin=(0, 0, 44), x_dir=(-1, 0, 0), z_dir=(0, 0, -1)).offset(CUT_EXTRUDE_START)):
        with Locations(Location((34.127715125, -12.772632206, 0), (0, 0, 235))):
            Circle(SKETCH_21_R)
    extrude(amount=CUT_EXTRUDE_13_DEPTH, mode=Mode.SUBTRACT)


solid = part.part
